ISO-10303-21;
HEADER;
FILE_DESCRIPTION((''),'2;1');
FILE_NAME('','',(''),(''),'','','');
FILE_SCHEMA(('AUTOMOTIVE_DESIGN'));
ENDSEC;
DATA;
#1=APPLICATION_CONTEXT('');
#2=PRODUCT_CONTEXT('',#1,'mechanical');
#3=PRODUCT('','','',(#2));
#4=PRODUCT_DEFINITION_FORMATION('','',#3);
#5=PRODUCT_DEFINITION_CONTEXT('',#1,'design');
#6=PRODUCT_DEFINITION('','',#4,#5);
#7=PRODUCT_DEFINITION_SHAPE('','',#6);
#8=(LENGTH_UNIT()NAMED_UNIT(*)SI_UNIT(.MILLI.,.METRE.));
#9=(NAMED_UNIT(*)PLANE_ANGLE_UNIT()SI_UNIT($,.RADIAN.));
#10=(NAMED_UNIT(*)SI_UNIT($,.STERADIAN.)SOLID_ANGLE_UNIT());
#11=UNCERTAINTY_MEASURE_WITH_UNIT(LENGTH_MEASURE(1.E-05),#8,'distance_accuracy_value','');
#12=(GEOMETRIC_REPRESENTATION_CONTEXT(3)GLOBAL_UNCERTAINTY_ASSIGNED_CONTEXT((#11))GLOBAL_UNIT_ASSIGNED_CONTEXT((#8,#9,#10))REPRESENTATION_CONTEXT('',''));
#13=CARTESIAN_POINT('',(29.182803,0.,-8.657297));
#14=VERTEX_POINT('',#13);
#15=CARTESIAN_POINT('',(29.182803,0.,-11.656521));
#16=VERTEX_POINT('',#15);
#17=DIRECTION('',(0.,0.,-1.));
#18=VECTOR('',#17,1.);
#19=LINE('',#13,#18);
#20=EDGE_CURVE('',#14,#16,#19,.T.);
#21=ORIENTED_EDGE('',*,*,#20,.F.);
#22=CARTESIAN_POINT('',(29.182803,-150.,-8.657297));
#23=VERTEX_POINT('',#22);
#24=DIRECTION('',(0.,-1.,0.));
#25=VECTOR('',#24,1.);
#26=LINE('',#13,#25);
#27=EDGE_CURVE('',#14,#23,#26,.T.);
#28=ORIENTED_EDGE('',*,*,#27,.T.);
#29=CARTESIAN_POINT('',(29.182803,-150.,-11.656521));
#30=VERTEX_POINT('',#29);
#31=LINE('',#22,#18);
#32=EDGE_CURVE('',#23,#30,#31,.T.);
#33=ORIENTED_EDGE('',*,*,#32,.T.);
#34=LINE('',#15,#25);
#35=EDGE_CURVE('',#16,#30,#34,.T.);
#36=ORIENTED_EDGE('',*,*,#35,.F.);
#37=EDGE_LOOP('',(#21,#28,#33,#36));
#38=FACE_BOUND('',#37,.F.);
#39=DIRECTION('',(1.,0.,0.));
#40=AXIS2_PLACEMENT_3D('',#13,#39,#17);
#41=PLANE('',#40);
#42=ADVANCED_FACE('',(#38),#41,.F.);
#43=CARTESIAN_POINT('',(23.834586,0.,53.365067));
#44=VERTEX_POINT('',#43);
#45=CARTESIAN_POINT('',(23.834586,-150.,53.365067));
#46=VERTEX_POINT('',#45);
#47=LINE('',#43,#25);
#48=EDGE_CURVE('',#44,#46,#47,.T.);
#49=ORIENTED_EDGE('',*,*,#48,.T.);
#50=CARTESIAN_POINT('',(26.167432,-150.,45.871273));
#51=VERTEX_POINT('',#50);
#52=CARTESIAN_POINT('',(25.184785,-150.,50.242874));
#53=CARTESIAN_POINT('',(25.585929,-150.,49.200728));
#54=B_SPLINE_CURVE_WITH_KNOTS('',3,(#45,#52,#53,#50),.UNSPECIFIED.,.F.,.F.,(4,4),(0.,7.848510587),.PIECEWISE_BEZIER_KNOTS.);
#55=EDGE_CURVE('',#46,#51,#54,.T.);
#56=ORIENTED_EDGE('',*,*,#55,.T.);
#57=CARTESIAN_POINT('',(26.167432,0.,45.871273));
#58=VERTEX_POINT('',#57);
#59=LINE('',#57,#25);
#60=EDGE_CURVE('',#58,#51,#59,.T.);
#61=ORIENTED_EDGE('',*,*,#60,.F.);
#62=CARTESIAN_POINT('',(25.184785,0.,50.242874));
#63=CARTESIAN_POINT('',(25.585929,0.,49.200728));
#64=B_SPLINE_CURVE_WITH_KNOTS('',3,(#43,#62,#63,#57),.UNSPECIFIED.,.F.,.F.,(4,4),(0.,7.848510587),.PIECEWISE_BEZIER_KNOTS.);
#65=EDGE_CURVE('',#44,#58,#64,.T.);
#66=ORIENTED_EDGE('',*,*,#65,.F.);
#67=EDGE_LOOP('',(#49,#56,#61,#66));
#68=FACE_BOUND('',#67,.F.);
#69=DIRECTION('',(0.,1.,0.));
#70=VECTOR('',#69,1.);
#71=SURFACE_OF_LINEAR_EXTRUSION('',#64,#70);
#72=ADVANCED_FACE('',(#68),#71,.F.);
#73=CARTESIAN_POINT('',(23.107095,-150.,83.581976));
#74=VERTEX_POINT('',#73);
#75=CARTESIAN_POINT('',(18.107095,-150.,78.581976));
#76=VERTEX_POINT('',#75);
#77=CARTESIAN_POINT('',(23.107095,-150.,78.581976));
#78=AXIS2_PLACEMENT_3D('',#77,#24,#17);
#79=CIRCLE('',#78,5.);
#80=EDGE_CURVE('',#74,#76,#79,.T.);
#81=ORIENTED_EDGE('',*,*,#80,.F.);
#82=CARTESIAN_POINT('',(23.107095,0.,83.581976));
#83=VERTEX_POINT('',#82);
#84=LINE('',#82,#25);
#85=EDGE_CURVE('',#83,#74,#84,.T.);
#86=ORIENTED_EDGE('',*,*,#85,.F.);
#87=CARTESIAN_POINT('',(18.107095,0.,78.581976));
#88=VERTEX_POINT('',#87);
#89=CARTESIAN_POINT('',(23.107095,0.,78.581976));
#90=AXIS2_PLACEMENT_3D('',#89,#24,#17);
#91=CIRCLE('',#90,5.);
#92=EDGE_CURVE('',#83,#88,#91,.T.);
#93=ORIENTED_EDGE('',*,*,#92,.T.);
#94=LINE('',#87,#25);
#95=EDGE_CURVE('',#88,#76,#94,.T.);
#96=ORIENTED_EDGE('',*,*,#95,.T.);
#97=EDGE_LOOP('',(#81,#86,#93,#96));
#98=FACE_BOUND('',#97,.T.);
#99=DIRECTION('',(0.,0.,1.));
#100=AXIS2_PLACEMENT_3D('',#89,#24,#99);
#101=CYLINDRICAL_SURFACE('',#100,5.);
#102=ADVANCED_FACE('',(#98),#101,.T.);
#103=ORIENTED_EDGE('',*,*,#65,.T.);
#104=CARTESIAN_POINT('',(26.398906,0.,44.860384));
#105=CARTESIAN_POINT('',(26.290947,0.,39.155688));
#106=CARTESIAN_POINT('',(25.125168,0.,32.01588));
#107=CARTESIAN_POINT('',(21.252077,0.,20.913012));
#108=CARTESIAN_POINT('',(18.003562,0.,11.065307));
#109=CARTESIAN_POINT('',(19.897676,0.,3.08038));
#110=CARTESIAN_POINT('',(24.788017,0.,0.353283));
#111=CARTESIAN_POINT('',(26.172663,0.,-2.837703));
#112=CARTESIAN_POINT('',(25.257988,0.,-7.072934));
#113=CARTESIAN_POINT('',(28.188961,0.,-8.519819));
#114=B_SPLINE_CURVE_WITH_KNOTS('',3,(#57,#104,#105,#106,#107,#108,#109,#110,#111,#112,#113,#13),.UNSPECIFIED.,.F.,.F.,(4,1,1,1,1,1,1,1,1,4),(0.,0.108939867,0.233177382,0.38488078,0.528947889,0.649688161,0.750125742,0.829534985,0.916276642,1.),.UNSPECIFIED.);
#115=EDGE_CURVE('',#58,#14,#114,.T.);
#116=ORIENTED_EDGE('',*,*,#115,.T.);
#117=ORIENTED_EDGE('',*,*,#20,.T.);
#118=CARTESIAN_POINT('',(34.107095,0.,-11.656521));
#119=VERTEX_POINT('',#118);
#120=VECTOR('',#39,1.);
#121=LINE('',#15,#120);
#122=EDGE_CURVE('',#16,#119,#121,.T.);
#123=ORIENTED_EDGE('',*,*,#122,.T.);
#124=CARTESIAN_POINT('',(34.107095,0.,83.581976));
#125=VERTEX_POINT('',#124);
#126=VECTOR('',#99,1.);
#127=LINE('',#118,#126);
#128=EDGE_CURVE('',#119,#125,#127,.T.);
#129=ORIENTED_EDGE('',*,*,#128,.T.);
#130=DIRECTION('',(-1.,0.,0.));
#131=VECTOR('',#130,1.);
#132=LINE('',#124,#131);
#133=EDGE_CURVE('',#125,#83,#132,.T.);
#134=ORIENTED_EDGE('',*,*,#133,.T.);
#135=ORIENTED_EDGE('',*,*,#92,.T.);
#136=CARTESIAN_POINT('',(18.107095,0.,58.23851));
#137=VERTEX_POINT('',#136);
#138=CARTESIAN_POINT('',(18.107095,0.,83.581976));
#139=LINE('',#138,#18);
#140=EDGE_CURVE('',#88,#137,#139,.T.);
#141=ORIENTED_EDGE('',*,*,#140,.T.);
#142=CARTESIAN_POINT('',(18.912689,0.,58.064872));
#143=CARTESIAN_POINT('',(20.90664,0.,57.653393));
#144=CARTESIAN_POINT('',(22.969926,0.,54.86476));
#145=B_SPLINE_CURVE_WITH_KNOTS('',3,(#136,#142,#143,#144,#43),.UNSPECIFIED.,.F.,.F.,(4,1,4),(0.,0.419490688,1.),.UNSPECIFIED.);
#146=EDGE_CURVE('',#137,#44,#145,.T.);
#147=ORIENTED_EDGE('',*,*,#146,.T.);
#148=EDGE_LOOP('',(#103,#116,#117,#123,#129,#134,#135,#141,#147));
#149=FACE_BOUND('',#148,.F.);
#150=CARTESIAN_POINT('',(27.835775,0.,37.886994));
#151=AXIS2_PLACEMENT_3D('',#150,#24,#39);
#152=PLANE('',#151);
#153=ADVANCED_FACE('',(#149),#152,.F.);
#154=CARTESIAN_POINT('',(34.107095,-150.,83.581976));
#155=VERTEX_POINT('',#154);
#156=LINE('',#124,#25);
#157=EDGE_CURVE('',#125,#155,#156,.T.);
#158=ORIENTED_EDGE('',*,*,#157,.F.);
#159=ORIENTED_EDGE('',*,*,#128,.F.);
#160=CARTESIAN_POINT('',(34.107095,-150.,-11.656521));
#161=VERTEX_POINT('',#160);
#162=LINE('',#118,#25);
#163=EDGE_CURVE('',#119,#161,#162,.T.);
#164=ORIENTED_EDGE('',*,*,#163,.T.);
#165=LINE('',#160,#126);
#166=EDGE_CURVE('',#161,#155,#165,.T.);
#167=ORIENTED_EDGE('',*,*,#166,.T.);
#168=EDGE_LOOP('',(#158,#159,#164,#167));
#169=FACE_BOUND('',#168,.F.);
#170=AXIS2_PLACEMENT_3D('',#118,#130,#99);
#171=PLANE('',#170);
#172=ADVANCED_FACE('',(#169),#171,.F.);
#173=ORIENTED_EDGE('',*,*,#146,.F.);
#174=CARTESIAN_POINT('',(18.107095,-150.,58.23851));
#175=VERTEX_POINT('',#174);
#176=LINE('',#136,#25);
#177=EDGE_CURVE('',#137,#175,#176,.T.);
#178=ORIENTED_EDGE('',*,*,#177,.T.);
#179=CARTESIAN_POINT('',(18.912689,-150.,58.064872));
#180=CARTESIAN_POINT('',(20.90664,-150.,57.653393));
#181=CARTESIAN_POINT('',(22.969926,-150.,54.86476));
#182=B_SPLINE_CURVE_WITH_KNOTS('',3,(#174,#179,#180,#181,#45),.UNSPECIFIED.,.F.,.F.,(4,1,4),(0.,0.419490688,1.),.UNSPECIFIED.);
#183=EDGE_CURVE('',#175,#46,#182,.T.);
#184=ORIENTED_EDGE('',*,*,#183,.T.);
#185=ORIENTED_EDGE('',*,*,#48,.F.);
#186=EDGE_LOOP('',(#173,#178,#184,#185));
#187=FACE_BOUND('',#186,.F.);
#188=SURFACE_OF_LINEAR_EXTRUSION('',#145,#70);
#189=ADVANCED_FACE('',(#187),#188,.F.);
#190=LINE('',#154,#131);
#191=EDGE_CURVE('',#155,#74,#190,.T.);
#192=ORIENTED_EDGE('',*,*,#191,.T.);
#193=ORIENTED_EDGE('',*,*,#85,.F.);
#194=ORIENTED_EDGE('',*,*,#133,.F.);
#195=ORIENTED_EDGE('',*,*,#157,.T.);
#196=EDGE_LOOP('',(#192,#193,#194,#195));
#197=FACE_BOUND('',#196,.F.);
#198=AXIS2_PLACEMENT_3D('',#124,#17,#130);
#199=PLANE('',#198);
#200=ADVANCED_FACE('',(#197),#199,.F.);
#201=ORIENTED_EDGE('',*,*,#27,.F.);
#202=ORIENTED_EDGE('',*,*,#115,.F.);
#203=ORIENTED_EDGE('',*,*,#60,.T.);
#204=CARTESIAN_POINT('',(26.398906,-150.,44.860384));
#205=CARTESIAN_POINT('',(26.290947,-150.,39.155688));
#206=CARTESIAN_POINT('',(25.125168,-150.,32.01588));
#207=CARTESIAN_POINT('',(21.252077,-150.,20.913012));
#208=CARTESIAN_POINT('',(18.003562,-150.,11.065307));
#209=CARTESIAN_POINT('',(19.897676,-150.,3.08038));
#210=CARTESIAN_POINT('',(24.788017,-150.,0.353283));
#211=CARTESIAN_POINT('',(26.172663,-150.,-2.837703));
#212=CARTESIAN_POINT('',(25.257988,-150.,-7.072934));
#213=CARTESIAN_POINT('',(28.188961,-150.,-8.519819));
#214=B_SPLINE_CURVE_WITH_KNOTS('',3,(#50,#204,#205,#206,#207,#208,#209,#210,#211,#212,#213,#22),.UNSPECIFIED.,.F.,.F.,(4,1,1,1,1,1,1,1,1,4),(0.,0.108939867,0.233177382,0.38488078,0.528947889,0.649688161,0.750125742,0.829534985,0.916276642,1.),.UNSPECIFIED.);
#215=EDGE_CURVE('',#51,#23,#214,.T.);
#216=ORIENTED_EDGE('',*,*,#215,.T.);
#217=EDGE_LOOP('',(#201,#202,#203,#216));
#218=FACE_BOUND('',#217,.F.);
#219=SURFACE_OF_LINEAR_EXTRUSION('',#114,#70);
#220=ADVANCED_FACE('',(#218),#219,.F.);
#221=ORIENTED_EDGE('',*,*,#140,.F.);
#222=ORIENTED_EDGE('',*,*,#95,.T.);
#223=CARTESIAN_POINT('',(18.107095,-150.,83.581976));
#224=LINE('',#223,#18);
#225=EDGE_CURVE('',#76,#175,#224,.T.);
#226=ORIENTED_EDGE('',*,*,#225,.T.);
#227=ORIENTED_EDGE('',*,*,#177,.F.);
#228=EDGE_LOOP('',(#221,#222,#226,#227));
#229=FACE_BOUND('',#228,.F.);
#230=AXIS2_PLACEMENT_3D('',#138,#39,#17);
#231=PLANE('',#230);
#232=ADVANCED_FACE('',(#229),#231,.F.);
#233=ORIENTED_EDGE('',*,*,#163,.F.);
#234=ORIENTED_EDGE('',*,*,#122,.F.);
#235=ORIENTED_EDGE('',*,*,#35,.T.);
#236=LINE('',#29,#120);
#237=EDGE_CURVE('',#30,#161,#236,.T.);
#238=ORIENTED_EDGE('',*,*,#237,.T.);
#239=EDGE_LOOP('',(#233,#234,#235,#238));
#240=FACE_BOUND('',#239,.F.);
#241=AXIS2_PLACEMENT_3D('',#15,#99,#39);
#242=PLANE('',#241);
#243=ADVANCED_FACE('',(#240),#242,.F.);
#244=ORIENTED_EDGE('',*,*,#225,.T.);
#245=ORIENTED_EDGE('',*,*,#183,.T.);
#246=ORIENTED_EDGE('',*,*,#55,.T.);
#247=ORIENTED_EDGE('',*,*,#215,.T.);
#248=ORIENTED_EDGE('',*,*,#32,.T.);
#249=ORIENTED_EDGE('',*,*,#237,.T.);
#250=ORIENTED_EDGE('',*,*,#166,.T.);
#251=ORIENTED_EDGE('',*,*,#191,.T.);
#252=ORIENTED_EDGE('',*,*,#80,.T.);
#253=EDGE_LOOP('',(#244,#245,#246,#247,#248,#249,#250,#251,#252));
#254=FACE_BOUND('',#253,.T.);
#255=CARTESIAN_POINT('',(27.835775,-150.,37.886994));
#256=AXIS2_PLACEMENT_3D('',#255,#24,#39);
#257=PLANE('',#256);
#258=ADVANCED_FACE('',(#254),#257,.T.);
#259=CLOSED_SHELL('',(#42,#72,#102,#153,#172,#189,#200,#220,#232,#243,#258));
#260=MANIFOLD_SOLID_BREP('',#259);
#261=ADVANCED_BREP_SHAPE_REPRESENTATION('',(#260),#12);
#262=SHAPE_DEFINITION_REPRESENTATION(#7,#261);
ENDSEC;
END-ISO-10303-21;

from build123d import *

# Parameters (mm, degrees)
F1_DEPTH = 150
F2_R     = 5


with BuildPart() as f1:
    # F0 (on Front) → F1 (new body)
    with BuildSketch(Plane.XZ):
        with BuildLine():
            Line((34.1070947651, -11.6565211154), (34.1070947651, 83.5819763541))
            Line((34.1070947651, 83.5819763541), (18.1070947651, 83.5819763541))
            Line((18.1070947651, 83.5819763541), (18.1070947651, 58.2385096952))
            add(Edge.make_bspline(
                [(18.1070947651, 58.2385096952), (18.9126885015, 58.0648723833), (20.9066399185, 57.6533927421), (22.9699261319, 54.8647603074), (23.8345864999, 53.365067498)],
                knots=[0, 0, 0, 0, 0.4194906876, 1, 1, 1, 1], degree=3))
            add(Edge.make_bspline(
                [(23.8345864999, 53.365067498), (25.184784915, 50.2428744032), (25.5859287593, 49.2007282356), (26.16743222, 45.8712734469)],
                knots=[0, 0, 0, 0, 7.8485105869, 7.8485105869, 7.8485105869, 7.8485105869], degree=3))
            add(Edge.make_bspline(
                [(26.16743222, 45.8712734469), (26.398906107, 44.8603835421), (26.2909467908, 39.1556882934), (25.1251682729, 32.0158799134), (21.2520767217, 20.9130118261), (18.0035620712, 11.0653072942), (19.8976758362, 3.0803796745), (24.7880165178, 0.3532833446), (26.1726626976, -2.8377032419), (25.2579878267, -7.0729338973), (28.1889608146, -8.5198188357), (29.1828027494, -8.6572972648)],
                knots=[0, 0, 0, 0, 0.1089398672, 0.2331773817, 0.3848807802, 0.5289478889, 0.6496881605, 0.750125742, 0.8295349848, 0.9162766416, 1, 1, 1, 1], degree=3))
            Line((29.1828027494, -8.6572972648), (29.1828027494, -11.6565211154))
            Line((29.1828027494, -11.6565211154), (34.1070947651, -11.6565211154))
        make_face()
    extrude(amount=F1_DEPTH)

    # F2
    f2_edges = [f1.edges().sort_by_distance(p)[0] for p in [
        (18.107095, -75, 83.581976),
    ]]
    fillet(f2_edges, radius=F2_R)


solid = f1.part
